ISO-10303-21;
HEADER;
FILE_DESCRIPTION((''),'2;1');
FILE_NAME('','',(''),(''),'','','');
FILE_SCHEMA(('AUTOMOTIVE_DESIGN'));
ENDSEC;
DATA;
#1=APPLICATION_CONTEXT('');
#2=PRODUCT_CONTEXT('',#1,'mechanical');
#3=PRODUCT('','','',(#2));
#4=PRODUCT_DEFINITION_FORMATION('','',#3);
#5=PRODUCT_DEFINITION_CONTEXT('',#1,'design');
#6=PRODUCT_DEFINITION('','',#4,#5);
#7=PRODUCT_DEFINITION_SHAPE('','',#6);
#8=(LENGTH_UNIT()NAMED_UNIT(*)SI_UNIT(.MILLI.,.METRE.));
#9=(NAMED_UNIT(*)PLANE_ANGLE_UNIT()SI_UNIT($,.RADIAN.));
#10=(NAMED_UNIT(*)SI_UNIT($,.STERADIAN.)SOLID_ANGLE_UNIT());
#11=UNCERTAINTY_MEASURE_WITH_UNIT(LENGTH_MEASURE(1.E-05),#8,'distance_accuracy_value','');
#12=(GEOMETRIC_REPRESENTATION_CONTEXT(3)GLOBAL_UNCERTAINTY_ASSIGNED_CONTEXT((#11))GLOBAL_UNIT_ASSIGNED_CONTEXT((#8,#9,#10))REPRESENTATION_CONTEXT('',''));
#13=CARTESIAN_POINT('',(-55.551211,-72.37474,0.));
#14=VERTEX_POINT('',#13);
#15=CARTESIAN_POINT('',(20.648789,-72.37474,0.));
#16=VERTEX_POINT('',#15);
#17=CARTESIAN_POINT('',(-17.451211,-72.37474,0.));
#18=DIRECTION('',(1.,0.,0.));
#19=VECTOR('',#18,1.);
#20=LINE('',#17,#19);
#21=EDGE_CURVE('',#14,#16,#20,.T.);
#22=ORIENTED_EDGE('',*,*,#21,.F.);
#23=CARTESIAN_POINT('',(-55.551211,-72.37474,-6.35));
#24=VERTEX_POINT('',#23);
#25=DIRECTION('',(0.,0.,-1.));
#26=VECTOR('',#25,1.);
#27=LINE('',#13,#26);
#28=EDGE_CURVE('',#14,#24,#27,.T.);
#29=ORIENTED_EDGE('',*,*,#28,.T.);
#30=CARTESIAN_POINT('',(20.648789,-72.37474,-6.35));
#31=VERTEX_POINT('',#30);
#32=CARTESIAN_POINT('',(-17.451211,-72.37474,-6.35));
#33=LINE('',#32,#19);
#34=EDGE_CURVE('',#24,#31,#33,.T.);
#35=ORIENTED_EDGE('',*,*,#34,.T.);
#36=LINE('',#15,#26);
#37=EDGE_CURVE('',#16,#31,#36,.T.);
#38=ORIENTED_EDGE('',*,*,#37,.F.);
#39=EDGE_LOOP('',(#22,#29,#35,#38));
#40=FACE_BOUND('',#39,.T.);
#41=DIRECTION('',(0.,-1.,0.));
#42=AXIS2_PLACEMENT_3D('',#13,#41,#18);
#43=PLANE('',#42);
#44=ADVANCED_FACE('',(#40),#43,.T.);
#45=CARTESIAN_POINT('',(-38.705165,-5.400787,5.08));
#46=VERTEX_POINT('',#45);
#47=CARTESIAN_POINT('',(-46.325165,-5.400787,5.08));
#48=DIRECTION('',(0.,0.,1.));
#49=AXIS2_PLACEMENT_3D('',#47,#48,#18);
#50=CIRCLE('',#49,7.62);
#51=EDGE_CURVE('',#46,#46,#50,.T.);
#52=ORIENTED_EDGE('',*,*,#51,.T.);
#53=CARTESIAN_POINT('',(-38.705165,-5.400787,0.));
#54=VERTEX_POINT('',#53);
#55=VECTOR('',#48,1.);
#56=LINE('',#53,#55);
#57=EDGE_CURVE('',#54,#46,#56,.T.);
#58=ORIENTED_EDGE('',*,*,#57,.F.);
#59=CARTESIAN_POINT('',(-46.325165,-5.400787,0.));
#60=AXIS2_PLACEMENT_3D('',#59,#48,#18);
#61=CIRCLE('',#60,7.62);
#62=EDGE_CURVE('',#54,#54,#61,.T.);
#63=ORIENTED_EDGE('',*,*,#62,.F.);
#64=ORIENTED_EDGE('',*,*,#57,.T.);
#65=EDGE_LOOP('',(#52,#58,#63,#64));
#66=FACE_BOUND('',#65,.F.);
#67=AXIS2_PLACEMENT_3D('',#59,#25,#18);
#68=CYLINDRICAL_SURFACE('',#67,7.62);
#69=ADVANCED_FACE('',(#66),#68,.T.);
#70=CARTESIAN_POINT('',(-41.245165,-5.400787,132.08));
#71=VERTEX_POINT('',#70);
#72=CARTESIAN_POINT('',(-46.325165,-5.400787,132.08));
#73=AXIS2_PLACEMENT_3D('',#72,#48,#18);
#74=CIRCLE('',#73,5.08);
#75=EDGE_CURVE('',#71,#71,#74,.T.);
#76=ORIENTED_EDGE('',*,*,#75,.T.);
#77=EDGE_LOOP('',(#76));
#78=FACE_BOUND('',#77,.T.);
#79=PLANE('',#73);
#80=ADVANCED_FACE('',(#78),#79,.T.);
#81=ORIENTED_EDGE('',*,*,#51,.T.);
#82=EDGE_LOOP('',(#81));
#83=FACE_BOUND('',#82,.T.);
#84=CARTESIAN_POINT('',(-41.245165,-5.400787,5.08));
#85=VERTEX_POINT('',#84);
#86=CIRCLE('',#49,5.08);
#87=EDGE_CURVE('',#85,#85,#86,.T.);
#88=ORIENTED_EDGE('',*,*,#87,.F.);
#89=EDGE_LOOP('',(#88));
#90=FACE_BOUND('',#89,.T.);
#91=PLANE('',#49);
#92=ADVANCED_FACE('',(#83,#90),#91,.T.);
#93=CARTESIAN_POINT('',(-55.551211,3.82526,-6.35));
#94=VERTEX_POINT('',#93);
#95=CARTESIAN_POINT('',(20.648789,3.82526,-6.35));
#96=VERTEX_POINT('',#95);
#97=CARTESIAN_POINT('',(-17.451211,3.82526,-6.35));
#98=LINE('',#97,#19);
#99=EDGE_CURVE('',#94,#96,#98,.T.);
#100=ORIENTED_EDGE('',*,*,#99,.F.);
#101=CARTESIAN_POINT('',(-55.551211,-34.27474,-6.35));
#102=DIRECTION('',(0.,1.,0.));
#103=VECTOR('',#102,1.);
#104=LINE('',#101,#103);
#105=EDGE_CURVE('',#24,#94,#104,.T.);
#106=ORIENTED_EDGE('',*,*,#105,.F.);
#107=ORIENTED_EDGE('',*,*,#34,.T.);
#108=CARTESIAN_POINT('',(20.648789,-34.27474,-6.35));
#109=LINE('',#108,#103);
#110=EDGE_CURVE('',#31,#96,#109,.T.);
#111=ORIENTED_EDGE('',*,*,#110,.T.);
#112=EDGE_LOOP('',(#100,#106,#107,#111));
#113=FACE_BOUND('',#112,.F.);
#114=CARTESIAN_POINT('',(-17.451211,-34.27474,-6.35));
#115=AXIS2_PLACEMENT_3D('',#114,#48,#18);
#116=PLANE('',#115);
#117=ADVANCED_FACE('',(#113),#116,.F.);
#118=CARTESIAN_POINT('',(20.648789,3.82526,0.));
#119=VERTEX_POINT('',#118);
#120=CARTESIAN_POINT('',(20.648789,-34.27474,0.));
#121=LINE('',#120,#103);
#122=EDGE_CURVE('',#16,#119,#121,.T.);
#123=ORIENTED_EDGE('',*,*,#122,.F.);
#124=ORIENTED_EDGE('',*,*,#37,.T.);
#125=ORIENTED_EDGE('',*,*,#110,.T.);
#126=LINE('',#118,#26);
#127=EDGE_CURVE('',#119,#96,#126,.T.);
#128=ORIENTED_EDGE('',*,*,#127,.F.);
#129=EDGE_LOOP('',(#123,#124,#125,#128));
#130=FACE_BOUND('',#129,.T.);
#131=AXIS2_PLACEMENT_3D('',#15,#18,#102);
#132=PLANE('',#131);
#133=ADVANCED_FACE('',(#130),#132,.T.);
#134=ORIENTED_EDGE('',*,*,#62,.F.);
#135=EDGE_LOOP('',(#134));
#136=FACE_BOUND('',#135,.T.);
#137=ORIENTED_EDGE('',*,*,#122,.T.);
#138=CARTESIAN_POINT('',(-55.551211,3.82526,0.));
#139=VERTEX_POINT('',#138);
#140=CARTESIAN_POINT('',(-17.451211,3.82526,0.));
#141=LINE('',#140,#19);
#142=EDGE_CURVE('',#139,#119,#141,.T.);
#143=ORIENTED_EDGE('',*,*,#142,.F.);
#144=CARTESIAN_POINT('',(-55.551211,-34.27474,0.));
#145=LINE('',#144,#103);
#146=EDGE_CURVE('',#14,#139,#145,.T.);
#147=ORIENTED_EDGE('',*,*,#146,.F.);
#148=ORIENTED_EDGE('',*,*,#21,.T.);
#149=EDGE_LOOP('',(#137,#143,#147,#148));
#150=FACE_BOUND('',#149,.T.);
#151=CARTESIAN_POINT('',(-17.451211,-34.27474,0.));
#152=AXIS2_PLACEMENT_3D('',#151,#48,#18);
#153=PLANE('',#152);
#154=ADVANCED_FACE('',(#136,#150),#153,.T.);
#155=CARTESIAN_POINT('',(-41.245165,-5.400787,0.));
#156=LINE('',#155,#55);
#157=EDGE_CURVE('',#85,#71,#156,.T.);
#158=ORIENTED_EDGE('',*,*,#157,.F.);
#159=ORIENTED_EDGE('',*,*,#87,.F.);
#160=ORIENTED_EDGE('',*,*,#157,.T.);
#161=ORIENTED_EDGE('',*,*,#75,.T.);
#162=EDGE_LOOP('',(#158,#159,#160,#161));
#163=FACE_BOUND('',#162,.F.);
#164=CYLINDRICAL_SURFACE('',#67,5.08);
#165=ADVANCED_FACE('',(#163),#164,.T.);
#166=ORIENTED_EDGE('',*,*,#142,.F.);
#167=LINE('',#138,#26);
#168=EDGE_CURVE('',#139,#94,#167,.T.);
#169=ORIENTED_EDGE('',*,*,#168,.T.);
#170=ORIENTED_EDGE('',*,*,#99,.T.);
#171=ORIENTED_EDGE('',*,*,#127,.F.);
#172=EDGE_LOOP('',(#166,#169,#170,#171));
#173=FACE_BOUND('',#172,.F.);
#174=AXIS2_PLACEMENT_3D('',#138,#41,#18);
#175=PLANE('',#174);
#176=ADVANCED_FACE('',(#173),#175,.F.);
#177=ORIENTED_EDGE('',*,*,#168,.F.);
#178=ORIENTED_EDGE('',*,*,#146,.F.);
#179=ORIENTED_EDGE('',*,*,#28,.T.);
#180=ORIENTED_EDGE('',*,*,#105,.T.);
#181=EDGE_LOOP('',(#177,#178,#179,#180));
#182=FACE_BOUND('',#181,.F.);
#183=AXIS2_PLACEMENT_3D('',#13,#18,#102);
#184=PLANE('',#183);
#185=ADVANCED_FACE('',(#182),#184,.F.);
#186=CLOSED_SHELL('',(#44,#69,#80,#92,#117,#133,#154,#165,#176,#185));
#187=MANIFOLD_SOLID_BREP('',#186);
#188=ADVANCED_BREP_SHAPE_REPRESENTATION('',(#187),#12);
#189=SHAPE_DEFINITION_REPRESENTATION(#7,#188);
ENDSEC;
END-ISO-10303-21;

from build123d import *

# Parameters (mm, degrees)
F0_W     = 76.2
F0_H     = 76.2
F0_R     = 7.62
F0_R_2   = 5.08
F1_DEPTH = 6.35
F2_DEPTH = 132.08
F3_DEPTH = 5.08


# Not quite as in the source:
# - a feature names something its author has since deleted; it is built from what else it names


with BuildPart() as f1:
    # F0 (on Top) → F1 (new body)
    with BuildSketch(Plane.XY):
        with Locations((-17.4512108788, -34.2747404939)):
            Rectangle(F0_W, F0_H)
        with Locations((-46.3251647948, -5.4007865778)):
            Circle(F0_R, mode=Mode.SUBTRACT)
        with Locations((-46.3251647948, -5.4007865778)):
            Circle(F0_R)
        with Locations((-46.3251647948, -5.4007865778)):
            Circle(F0_R_2, mode=Mode.SUBTRACT)
        with Locations((-46.3251647948, -5.4007865778)):
            Circle(F0_R_2)
    extrude(amount=-F1_DEPTH)

    # F0 (on Top) → F2 (join)
    with BuildSketch(Plane.XY):
        with Locations((-46.3251647948, -5.4007865778)):
            Circle(F0_R_2)
    extrude(amount=F2_DEPTH)

    # F0 (on Top) → F3 (join)
    with BuildSketch(Plane.XY):
        with Locations((-46.3251647948, -5.4007865778)):
            Circle(F0_R)
        with Locations((-46.3251647948, -5.4007865778)):
            Circle(F0_R_2, mode=Mode.SUBTRACT)
    extrude(amount=F3_DEPTH)


solid = f1.part
